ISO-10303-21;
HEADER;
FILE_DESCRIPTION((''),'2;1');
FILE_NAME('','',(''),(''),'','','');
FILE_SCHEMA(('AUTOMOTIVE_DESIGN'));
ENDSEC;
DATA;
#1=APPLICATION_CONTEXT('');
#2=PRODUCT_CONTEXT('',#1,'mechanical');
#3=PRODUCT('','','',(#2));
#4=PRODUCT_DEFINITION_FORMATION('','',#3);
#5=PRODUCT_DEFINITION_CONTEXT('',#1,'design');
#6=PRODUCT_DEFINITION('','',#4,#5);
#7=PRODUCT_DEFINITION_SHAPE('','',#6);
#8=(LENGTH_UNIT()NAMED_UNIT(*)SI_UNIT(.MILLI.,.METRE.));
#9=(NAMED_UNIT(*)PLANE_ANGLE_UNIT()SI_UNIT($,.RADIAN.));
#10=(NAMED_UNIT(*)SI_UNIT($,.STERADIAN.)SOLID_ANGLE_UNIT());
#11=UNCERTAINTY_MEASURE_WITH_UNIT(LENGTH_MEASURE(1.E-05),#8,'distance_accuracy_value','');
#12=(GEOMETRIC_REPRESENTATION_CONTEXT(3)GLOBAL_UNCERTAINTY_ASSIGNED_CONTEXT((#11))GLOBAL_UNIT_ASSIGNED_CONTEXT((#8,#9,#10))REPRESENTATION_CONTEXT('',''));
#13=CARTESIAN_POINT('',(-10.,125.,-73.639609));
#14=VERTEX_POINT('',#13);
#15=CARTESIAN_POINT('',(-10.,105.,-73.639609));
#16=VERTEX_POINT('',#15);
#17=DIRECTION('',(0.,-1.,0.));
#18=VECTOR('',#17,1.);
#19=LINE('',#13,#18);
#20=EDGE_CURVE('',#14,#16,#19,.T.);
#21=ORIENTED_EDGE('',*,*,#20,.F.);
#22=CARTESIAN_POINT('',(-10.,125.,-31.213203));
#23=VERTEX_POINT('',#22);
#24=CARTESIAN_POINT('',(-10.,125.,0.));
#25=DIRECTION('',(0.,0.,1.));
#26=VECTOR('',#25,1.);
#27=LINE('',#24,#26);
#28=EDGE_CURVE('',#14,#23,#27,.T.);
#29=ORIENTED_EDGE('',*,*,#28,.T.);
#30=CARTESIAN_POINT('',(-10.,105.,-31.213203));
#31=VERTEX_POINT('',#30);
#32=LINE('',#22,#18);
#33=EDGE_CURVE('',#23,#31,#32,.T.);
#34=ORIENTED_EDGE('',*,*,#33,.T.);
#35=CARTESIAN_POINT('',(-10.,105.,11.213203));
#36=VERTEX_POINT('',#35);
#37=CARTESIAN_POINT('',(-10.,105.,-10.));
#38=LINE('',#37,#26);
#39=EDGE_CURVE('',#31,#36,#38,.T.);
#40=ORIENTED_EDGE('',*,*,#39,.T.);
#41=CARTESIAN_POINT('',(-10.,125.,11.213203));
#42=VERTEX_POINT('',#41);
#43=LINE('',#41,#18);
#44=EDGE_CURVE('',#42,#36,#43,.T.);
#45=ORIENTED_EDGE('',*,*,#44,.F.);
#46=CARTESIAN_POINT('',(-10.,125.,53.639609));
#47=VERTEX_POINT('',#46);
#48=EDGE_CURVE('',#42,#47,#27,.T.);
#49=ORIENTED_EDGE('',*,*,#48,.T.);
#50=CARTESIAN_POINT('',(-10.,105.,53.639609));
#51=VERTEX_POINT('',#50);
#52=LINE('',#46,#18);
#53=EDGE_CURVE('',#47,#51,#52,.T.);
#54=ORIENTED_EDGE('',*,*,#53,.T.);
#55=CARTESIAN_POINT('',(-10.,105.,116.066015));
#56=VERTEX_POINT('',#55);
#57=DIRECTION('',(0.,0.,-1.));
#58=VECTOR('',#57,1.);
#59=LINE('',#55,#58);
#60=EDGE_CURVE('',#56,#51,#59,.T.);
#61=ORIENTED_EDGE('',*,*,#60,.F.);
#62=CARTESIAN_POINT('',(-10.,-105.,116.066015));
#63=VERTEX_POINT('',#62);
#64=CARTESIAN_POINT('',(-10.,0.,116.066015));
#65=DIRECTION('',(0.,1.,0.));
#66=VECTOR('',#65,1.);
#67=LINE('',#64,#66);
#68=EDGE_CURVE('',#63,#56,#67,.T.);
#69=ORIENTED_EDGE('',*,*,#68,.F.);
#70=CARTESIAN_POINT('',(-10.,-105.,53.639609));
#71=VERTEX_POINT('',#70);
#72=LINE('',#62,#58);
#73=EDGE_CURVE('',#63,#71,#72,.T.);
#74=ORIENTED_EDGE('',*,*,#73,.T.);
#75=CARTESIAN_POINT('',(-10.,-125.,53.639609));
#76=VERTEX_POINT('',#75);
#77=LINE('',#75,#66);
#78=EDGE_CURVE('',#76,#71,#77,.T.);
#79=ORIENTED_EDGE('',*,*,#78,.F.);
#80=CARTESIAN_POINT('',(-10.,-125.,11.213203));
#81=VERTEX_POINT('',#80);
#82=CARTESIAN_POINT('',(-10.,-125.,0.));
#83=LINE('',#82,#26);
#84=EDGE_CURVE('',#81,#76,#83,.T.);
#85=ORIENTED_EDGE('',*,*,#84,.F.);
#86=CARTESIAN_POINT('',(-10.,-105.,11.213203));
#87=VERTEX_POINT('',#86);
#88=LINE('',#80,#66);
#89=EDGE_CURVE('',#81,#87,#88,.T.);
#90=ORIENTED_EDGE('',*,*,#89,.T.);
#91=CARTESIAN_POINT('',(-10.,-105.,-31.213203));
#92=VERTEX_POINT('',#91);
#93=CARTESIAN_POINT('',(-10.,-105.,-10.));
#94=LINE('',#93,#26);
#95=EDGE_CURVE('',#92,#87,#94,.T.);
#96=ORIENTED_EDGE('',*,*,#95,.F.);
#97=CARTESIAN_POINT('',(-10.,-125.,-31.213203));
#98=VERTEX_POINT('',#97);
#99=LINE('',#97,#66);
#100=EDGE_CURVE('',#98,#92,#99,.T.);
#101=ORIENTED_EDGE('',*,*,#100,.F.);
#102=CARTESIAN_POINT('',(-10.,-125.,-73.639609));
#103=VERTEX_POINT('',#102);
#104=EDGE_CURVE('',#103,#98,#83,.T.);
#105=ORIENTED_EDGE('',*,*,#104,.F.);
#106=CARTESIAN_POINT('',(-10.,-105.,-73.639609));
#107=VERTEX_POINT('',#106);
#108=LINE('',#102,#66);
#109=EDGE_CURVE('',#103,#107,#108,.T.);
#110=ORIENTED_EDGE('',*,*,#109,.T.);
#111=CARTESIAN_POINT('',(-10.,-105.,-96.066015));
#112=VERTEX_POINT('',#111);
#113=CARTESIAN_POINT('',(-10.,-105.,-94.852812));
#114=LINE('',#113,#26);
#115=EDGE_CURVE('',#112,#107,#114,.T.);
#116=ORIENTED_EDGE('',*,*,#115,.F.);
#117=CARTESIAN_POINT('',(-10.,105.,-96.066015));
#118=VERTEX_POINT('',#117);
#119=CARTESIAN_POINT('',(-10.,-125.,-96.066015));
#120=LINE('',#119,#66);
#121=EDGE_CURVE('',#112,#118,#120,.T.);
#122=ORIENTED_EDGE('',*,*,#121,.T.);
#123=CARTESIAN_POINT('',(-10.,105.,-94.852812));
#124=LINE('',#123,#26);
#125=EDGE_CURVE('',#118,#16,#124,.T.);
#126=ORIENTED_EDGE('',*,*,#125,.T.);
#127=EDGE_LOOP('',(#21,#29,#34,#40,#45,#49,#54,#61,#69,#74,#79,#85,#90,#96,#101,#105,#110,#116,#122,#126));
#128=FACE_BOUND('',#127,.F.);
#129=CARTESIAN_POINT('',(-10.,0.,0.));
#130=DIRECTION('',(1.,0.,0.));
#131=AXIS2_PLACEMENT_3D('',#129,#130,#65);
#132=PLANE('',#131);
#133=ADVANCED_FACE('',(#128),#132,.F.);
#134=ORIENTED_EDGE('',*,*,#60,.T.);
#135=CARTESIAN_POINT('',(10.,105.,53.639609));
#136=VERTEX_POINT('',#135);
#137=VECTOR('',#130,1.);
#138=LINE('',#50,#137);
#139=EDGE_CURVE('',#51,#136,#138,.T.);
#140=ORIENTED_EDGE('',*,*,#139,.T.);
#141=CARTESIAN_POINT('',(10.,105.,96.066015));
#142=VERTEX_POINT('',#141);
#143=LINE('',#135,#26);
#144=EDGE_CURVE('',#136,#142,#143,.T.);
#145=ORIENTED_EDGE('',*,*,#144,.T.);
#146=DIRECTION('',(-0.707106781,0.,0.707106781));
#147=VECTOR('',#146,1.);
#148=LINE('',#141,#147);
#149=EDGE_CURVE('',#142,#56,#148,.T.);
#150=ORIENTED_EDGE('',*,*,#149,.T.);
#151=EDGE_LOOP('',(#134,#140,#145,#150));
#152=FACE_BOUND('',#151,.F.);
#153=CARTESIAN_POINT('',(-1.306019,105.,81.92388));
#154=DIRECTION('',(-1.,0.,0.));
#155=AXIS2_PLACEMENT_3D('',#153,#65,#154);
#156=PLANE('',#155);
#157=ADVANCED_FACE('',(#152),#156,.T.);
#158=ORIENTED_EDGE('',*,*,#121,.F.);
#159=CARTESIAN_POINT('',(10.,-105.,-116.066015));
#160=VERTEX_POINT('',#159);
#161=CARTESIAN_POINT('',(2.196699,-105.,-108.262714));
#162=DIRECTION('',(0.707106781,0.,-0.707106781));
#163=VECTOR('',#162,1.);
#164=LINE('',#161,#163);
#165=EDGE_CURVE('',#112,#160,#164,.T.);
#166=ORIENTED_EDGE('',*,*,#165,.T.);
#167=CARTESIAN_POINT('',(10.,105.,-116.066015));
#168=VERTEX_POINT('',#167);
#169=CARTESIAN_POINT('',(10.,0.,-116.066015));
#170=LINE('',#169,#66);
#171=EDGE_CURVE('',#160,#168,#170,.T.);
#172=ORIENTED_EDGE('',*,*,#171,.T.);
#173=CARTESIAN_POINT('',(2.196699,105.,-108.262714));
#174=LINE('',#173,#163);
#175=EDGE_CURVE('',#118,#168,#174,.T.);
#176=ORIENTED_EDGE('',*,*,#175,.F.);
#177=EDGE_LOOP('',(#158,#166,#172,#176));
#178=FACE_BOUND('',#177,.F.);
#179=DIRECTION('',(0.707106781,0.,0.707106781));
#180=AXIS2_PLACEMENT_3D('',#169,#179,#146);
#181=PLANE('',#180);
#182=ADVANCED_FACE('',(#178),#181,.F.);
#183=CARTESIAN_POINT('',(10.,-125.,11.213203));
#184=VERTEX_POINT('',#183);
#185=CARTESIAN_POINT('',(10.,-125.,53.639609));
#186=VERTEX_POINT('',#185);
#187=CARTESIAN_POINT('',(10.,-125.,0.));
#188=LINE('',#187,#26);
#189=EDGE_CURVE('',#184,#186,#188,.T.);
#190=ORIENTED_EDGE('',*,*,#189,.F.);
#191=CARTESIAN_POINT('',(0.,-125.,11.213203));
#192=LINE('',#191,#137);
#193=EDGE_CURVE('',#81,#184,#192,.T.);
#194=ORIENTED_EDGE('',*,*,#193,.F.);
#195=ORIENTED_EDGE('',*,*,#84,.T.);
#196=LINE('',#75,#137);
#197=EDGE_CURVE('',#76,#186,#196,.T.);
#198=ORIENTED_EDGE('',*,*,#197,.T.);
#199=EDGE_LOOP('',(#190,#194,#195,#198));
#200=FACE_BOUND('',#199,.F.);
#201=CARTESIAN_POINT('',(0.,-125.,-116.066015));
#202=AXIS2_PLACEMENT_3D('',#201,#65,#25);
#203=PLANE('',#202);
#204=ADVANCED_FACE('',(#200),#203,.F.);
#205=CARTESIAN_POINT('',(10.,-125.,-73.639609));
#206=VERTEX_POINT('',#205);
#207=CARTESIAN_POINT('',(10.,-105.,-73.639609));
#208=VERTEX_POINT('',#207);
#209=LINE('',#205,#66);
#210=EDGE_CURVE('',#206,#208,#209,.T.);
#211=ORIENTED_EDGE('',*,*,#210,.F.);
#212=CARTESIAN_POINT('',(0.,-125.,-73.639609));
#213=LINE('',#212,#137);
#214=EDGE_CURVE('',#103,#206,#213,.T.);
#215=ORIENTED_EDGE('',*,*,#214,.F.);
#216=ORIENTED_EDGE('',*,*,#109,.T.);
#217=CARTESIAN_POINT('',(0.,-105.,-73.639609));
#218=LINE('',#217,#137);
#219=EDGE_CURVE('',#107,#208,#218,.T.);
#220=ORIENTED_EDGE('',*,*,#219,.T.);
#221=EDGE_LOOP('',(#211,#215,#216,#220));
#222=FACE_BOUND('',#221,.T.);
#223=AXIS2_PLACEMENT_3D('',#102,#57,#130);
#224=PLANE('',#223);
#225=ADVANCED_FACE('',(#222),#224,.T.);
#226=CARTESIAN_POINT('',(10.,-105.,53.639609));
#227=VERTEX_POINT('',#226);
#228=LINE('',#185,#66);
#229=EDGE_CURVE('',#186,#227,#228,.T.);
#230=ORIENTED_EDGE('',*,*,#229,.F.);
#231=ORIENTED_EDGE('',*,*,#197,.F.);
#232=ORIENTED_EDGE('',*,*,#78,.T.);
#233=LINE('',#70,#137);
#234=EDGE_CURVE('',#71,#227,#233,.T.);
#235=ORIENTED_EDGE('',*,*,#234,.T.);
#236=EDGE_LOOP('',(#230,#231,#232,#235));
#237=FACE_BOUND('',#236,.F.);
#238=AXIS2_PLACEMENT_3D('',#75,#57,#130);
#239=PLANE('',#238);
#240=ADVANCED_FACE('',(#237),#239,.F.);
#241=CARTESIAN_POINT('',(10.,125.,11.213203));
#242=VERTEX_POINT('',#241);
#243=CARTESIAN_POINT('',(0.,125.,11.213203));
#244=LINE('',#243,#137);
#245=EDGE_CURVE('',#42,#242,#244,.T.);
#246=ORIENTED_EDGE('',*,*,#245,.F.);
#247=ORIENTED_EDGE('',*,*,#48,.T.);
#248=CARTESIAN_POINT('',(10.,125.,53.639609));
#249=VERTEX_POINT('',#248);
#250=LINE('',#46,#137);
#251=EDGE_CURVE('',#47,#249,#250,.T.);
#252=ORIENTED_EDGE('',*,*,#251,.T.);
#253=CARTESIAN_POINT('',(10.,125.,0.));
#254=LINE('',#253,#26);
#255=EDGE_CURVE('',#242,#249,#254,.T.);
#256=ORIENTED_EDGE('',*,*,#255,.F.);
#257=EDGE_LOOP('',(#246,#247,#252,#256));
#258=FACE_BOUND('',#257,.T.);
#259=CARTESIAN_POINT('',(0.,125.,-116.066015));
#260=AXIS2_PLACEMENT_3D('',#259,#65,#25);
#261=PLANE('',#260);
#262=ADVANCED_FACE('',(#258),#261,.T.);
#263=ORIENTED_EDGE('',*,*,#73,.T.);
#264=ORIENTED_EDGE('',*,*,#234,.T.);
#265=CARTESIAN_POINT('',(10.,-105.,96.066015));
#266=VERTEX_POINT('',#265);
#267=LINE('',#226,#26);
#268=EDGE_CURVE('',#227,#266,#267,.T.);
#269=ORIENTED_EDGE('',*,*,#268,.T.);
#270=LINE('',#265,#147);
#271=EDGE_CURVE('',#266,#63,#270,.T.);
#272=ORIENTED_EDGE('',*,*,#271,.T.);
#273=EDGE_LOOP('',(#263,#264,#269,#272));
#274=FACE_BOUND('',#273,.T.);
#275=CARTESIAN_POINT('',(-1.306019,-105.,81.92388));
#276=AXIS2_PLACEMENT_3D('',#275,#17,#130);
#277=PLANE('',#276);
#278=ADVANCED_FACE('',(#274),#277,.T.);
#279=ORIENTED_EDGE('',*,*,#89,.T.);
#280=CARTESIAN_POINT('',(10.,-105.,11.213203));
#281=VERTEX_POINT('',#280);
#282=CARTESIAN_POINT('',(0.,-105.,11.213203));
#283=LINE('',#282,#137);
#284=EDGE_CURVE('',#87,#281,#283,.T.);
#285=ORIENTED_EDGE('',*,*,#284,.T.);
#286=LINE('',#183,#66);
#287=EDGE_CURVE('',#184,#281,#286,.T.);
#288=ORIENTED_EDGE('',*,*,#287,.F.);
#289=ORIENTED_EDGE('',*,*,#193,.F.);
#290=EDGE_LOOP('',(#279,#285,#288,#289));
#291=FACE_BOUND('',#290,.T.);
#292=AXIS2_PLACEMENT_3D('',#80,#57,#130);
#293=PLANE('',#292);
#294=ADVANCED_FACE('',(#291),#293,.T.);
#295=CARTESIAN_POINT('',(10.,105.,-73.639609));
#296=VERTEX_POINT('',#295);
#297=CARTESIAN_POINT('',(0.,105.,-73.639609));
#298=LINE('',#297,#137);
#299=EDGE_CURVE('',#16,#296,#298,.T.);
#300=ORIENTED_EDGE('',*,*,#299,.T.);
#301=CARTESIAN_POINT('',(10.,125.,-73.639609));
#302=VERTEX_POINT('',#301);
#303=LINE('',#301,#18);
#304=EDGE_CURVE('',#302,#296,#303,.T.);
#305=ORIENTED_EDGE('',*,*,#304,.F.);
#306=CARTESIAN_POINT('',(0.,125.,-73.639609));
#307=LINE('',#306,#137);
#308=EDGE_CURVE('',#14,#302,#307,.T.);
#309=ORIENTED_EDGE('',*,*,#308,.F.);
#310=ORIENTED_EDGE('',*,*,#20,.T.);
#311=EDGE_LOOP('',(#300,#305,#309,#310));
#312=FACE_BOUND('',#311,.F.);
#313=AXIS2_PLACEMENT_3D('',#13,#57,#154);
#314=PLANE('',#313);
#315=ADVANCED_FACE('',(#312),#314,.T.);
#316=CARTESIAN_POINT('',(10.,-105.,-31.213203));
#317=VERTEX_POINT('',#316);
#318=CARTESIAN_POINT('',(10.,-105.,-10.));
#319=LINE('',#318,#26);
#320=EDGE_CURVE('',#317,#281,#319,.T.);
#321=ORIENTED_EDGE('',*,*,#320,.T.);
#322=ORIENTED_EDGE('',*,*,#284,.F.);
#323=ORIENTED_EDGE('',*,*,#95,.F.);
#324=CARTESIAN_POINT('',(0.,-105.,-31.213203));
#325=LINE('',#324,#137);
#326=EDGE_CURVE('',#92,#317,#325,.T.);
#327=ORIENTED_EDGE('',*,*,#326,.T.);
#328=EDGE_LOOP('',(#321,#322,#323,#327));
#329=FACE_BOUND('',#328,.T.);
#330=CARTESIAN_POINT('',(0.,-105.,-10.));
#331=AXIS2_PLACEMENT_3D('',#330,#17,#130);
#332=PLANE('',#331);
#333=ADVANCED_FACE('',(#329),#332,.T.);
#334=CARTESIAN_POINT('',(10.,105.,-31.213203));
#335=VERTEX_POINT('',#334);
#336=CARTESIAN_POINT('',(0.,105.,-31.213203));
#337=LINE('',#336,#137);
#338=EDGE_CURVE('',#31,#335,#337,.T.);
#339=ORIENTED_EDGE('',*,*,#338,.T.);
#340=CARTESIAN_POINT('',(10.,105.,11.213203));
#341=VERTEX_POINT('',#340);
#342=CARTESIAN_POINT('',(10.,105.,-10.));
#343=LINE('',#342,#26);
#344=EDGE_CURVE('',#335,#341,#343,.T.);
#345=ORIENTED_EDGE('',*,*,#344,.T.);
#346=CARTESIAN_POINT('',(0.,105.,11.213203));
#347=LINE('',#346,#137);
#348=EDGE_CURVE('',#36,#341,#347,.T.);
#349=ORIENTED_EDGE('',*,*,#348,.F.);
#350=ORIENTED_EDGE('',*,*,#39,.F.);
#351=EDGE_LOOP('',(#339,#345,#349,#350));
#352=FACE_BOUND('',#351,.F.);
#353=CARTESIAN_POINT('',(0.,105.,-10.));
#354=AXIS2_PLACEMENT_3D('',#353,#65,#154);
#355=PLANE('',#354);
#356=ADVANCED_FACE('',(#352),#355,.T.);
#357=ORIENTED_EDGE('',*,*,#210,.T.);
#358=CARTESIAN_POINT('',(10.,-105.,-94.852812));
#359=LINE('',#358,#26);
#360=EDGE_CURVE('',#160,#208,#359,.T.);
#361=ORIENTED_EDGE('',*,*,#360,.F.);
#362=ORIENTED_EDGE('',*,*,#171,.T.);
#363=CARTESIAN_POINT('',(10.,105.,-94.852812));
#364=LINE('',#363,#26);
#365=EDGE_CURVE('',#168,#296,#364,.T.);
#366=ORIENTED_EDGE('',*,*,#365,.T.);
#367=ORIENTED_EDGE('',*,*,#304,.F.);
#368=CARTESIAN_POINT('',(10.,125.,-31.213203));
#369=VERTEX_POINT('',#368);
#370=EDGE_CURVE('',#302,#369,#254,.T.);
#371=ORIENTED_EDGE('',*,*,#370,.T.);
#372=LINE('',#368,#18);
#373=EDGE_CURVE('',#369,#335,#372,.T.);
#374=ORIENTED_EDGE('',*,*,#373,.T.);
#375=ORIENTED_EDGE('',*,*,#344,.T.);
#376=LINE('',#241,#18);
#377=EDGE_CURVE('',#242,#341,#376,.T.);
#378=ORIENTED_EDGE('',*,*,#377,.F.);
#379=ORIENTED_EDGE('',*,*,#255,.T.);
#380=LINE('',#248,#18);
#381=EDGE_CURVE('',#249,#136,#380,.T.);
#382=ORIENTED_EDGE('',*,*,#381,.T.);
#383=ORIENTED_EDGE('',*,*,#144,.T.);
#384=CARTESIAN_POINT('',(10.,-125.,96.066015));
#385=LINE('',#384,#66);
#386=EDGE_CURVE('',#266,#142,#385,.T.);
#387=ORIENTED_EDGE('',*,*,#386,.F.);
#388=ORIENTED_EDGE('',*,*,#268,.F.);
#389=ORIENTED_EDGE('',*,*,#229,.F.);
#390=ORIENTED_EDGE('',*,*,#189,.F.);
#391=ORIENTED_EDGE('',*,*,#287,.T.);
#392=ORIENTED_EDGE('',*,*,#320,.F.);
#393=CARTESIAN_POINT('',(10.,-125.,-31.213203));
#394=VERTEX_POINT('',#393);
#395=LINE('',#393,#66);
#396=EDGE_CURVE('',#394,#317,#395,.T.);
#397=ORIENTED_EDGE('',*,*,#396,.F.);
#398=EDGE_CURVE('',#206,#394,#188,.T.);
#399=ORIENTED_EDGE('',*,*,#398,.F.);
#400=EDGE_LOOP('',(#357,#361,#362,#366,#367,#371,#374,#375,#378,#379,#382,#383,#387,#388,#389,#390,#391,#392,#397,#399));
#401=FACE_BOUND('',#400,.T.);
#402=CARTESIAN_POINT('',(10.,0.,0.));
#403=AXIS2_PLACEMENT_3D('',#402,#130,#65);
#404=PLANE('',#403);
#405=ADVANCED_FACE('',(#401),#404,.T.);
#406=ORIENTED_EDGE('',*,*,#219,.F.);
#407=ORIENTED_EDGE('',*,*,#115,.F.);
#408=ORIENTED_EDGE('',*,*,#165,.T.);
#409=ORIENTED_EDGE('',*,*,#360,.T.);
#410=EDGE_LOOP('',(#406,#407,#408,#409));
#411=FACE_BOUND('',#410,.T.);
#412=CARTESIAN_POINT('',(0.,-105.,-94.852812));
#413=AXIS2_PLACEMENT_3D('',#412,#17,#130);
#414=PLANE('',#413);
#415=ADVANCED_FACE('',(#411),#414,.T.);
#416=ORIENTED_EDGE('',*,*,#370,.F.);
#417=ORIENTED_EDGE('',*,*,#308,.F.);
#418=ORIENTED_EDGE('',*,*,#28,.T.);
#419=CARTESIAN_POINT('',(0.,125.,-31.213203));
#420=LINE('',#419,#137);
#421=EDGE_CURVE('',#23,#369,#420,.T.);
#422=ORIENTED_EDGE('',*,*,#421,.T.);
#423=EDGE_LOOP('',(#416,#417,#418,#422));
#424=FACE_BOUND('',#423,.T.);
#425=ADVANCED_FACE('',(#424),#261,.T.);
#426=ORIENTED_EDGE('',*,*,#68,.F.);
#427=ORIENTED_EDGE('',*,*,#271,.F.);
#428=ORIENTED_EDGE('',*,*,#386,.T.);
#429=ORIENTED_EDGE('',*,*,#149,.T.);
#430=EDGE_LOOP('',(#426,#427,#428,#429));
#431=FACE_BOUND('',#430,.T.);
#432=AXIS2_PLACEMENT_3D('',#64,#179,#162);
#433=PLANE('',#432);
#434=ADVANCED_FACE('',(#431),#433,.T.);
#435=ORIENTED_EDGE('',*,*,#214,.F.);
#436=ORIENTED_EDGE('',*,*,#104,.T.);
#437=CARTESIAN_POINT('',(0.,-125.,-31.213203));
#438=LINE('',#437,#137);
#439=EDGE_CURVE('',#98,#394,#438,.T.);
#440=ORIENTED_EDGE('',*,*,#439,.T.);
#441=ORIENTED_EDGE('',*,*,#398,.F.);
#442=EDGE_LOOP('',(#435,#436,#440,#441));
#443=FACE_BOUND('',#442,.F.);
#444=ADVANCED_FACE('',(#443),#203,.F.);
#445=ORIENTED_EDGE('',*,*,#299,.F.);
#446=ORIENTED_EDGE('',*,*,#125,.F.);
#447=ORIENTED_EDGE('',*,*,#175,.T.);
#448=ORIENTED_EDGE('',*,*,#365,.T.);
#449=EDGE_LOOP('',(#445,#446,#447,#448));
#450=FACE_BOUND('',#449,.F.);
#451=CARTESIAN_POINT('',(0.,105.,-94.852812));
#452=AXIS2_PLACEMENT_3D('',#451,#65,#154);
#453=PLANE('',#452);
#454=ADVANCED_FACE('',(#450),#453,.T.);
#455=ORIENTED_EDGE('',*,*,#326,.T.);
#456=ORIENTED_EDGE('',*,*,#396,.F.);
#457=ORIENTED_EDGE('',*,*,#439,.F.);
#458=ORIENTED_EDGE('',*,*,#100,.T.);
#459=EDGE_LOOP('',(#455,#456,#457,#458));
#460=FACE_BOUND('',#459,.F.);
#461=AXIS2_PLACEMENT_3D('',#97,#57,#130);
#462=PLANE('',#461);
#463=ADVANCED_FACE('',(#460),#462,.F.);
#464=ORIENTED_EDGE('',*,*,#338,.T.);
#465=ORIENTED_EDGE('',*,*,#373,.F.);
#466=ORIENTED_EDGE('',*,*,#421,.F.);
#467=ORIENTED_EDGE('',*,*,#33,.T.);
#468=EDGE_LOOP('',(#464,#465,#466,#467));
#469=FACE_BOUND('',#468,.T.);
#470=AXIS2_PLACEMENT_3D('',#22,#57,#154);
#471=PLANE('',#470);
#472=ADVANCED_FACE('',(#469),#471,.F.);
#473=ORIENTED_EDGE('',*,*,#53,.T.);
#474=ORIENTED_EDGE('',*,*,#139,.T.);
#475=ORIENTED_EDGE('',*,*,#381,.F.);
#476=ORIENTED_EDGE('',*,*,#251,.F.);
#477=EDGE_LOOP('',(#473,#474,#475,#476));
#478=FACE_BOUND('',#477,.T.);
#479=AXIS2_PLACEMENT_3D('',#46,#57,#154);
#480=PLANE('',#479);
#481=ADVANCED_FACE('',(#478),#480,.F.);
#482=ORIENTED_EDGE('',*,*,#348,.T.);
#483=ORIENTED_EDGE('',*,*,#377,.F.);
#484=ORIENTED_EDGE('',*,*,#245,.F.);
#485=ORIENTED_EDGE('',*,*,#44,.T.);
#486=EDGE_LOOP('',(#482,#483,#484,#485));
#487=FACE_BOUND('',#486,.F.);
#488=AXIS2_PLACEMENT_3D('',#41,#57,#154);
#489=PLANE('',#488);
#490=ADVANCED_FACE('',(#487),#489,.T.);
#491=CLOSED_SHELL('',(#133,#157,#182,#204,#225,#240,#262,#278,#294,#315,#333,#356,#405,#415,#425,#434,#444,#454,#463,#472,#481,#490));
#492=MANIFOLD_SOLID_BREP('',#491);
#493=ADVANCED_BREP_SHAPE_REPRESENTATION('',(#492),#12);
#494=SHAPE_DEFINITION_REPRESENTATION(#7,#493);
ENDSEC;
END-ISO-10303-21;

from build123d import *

# Parameters (mm, degrees)
F2_W     = 250
F2_H     = 232.13203
F3_DEPTH = 10
F5_DEPTH = 125
F6_W     = 20
F6_H     = 42.426406
F7_DEPTH = 20


# Not quite as in the source:
# - a pattern or mirror of a feature is missing from the dataset's text; its kind, count and spacing are read off the source's solid


with BuildPart() as f3:
    # F2 (on Right) → F3 (new body, symmetric)
    with BuildSketch(Plane.YZ):
        Rectangle(F2_W, F2_H)
    extrude(amount=F3_DEPTH, both=True)

    # F4 (on Front) → F5 (cut, symmetric)
    with BuildSketch(Plane.XZ):
        Polygon((10, 116.066015), (-10, 116.066015), (10, 96.066015), align=None)
        Polygon((-10, -116.066015), (10, -116.066015), (-10, -96.066015), align=None)
    extrude(amount=F5_DEPTH, both=True, mode=Mode.SUBTRACT)

    # F6 (on face) → F7 (cut)
    with BuildSketch(Plane.XZ.offset(125)):
        Polygon((-10, 53.639609), (10, 53.639609), (10, 96.066015), (-10, 116.066015), (-10, 96.066015), align=None)
        with Locations((0, -10)):
            Rectangle(F6_W, F6_H)
        with Locations((0, -94.852812)):
            Rectangle(F6_W, F6_H)
    f7 = extrude(amount=-F7_DEPTH, mode=Mode.SUBTRACT)

    # F7_copies: F7 across plane
    add(f7.mirror(Plane.ZX), mode=Mode.SUBTRACT)


solid = f3.part
